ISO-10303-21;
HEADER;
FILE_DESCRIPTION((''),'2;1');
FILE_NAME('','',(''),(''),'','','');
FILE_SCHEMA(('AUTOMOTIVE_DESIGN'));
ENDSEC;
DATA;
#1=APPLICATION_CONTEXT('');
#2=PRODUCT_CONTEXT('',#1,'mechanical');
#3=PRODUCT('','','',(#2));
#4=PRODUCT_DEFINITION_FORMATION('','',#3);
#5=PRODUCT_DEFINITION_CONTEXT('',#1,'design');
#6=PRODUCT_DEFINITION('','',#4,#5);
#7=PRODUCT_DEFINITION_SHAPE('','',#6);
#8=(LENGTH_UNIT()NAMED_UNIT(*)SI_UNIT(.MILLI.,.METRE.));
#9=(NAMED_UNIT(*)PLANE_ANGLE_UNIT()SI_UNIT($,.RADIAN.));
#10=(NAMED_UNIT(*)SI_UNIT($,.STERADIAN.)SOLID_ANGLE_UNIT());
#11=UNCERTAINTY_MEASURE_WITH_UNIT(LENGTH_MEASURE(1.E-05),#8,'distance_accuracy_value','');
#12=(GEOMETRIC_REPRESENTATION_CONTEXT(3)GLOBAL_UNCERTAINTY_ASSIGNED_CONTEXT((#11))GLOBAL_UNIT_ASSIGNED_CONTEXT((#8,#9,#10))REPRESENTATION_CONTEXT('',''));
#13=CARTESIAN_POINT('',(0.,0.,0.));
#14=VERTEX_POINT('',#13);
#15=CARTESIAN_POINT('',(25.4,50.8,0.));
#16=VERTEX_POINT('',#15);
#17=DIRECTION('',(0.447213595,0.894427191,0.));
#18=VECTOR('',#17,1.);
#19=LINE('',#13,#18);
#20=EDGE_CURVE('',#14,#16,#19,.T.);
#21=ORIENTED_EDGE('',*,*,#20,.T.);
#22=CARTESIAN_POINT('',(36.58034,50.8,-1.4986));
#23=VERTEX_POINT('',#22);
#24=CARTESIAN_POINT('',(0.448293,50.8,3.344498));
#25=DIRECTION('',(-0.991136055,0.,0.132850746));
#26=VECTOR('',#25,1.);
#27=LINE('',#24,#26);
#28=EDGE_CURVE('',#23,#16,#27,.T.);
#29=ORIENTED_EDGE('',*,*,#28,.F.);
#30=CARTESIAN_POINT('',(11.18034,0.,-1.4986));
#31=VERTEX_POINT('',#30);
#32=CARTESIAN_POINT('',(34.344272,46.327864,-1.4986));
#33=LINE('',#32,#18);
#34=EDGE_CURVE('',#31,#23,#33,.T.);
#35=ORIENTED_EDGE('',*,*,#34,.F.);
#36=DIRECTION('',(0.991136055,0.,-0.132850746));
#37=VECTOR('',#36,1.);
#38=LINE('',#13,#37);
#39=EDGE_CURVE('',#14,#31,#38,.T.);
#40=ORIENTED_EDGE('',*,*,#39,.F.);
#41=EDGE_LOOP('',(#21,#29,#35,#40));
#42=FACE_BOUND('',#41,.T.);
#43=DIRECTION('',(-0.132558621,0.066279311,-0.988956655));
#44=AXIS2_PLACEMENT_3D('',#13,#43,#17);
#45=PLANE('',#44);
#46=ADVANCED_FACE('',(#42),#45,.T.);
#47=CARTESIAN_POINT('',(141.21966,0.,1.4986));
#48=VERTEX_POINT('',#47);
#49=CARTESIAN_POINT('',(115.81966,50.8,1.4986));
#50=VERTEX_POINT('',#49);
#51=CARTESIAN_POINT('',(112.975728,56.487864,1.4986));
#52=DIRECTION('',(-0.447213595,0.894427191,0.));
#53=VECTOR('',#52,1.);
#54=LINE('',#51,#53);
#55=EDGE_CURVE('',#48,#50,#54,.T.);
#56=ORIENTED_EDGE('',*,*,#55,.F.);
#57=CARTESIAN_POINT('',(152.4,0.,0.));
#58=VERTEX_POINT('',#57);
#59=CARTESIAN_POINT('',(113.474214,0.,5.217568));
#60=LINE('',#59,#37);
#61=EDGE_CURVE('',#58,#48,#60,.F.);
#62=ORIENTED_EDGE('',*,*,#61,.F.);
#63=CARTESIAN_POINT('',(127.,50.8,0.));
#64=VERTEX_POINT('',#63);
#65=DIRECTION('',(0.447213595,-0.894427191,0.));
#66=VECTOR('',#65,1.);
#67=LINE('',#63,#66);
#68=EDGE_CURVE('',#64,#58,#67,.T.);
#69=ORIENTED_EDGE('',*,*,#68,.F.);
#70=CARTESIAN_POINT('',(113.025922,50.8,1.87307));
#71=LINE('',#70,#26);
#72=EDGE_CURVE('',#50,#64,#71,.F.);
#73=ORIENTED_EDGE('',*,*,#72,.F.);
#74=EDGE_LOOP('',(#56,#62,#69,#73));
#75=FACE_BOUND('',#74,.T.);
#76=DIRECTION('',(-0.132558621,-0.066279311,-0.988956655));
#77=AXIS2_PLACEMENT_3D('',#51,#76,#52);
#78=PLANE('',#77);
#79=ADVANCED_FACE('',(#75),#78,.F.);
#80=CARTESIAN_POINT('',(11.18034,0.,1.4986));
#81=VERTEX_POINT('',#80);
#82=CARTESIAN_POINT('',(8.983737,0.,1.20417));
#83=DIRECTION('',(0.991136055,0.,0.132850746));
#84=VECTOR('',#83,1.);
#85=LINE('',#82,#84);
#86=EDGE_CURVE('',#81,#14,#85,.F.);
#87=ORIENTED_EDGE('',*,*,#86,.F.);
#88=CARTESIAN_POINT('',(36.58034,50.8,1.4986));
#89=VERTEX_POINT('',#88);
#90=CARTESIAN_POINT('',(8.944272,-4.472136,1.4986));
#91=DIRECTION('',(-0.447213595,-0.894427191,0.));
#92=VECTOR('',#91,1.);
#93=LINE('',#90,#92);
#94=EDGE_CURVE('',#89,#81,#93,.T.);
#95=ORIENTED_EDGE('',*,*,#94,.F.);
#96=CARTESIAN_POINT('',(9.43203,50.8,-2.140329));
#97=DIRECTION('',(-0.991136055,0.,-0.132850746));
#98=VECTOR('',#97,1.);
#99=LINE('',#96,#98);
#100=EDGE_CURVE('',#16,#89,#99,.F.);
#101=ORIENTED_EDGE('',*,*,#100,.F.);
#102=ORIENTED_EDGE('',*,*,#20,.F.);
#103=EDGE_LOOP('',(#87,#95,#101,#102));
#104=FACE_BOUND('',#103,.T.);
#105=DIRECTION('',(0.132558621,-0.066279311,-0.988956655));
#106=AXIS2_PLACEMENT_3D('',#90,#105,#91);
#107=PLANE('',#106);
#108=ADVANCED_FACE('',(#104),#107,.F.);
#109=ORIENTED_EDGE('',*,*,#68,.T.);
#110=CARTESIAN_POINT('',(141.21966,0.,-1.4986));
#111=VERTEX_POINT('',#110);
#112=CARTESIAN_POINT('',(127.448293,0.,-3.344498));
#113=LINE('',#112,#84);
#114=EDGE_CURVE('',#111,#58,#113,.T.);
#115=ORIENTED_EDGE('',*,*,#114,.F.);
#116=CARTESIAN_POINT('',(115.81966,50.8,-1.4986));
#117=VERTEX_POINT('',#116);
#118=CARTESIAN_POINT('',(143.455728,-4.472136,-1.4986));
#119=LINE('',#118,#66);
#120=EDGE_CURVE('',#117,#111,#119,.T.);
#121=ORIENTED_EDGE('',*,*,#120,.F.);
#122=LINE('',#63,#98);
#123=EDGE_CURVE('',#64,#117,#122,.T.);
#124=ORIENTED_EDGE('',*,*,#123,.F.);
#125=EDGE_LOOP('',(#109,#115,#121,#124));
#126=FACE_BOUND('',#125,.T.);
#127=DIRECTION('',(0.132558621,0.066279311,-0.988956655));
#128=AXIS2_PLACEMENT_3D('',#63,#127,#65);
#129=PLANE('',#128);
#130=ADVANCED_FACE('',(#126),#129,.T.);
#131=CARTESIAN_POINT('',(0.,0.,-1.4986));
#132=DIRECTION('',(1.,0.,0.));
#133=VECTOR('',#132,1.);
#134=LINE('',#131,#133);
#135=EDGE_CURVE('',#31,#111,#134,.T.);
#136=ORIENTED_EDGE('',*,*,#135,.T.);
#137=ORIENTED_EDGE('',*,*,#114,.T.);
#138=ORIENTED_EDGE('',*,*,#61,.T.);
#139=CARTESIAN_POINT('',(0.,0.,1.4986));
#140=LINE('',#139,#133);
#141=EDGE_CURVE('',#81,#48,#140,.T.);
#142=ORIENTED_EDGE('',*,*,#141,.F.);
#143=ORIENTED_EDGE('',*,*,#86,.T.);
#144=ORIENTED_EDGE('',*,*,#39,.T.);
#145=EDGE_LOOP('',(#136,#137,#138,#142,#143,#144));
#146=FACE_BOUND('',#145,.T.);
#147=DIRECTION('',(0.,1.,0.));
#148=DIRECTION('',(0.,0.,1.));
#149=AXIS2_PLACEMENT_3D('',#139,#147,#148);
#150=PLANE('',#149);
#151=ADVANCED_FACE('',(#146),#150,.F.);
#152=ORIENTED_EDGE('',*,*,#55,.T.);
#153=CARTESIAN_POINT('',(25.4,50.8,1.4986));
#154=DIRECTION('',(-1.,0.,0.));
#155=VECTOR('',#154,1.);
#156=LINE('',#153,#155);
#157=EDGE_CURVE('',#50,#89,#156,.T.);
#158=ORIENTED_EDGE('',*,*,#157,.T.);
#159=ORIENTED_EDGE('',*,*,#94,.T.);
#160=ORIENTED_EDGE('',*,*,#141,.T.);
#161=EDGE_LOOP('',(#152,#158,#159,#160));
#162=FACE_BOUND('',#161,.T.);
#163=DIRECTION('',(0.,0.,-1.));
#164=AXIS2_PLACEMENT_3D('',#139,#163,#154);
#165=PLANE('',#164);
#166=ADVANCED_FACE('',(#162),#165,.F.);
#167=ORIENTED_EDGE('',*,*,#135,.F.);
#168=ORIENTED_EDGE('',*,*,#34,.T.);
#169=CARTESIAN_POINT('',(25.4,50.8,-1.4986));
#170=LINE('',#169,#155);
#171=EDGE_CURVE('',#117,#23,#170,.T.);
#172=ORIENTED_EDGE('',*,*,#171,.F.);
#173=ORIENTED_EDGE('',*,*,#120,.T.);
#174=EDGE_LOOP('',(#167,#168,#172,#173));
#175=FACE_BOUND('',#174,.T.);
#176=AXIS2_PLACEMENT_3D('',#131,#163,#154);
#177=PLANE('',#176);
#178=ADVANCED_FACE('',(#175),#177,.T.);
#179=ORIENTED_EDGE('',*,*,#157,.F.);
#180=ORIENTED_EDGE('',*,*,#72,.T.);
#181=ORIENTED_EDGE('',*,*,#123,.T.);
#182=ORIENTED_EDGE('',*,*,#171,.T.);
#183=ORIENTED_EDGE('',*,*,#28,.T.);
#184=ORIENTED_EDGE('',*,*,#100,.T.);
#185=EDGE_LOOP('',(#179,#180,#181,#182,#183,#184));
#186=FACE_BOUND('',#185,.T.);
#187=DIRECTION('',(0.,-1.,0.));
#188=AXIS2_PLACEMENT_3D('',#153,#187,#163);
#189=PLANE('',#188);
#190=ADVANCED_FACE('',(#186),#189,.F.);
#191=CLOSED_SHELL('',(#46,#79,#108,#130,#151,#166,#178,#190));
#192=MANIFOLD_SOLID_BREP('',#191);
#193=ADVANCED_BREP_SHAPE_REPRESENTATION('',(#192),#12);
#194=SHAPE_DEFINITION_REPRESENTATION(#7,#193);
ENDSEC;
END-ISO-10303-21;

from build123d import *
from OCP.BRepFilletAPI import BRepFilletAPI_MakeChamfer

# Parameters (mm, degrees)
BOSS_EXTRUDE1_DEPTH = 1.4986
CHAMFER1_SIZE       = 1.4986
CHAMFER1_SIZE_2     = 10
CHAMFER2_SIZE       = 10
CHAMFER2_SIZE_2     = 1.4986


# Some blends are built 0.0001 mm under size
with BuildPart() as part:
    # Sketch1 → Boss-Extrude1 (new, symmetric)
    with BuildSketch(Plane.XY):
        Polygon((0, 0), (25.4, 50.8), (127, 50.8), (152.4, 0), align=None)
    extrude(amount=BOSS_EXTRUDE1_DEPTH, both=True)

    # Chamfer1
    # the kernel refuses this chamfer: 10, 1.4986 mm, written as the material it takes off along each edge
    with BuildSketch(Plane(origin=(-11.62280373, -23.24560746, -1.4986), x_dir=(-0.22013014518345764, 0.11006507259172885, 0.9692411459368031), z_dir=(0.4472135954999581, 0.8944271909999159, 0))) as chamfer1_piece_1:
        Polygon((CHAMFER1_SIZE * 0.969241145937, CHAMFER1_SIZE * 0.246112984264), (-CHAMFER1_SIZE_2 * 0.246112984264, CHAMFER1_SIZE_2 * 0.969241145937), (0, 0), align=None)
    extrude(amount=108.774885087, mode=Mode.SUBTRACT)
    with BuildSketch(Plane(origin=(-11.62280373, -23.24560746, 1.4986), x_dir=(-0.22013014518345764, 0.11006507259172885, -0.9692411459368031), z_dir=(0.4472135954999581, 0.8944271909999159, 0))) as chamfer1_piece_2:
        Polygon((CHAMFER1_SIZE * 0.969241145937, -CHAMFER1_SIZE * 0.246112984264), (-CHAMFER1_SIZE_2 * 0.246112984264, -CHAMFER1_SIZE_2 * 0.969241145937), (0, 0), align=None)
    extrude(amount=108.774885087, mode=Mode.SUBTRACT)

    # Chamfer2
    chamfer2_edges_1 = [part.edges().sort_by_distance(p)[0] for p in [
        (139.7, 25.4, -1.4986),
    ]]
    chamfer2_side_1 = [part.faces().sort_by_distance(p)[0] for p in [
        (139.673192228, 25.386596114, -1.4986),
    ]]
    chamfer2_edges_2 = [part.edges().sort_by_distance(p)[0] for p in [
        (139.7, 25.4, 1.4986),
    ]]
    chamfer2_side_2 = [part.faces().sort_by_distance(p)[0] for p in [
        (139.7, 25.4, 1.468628),
    ]]
    chamfer2 = BRepFilletAPI_MakeChamfer(part.part.solid().wrapped)
    for e in chamfer2_edges_1:
        chamfer2.Add(CHAMFER2_SIZE - 0.0001, CHAMFER2_SIZE_2 - 0.0001, e.wrapped, chamfer2_side_1[0].wrapped)
    for e in chamfer2_edges_2:
        chamfer2.Add(CHAMFER2_SIZE_2 - 0.0001, CHAMFER2_SIZE - 0.0001, e.wrapped, chamfer2_side_2[0].wrapped)
    add(Compound.cast(chamfer2.Shape()), mode=Mode.REPLACE)  # a hair under: the kernel refuses the full size


solid = part.part
